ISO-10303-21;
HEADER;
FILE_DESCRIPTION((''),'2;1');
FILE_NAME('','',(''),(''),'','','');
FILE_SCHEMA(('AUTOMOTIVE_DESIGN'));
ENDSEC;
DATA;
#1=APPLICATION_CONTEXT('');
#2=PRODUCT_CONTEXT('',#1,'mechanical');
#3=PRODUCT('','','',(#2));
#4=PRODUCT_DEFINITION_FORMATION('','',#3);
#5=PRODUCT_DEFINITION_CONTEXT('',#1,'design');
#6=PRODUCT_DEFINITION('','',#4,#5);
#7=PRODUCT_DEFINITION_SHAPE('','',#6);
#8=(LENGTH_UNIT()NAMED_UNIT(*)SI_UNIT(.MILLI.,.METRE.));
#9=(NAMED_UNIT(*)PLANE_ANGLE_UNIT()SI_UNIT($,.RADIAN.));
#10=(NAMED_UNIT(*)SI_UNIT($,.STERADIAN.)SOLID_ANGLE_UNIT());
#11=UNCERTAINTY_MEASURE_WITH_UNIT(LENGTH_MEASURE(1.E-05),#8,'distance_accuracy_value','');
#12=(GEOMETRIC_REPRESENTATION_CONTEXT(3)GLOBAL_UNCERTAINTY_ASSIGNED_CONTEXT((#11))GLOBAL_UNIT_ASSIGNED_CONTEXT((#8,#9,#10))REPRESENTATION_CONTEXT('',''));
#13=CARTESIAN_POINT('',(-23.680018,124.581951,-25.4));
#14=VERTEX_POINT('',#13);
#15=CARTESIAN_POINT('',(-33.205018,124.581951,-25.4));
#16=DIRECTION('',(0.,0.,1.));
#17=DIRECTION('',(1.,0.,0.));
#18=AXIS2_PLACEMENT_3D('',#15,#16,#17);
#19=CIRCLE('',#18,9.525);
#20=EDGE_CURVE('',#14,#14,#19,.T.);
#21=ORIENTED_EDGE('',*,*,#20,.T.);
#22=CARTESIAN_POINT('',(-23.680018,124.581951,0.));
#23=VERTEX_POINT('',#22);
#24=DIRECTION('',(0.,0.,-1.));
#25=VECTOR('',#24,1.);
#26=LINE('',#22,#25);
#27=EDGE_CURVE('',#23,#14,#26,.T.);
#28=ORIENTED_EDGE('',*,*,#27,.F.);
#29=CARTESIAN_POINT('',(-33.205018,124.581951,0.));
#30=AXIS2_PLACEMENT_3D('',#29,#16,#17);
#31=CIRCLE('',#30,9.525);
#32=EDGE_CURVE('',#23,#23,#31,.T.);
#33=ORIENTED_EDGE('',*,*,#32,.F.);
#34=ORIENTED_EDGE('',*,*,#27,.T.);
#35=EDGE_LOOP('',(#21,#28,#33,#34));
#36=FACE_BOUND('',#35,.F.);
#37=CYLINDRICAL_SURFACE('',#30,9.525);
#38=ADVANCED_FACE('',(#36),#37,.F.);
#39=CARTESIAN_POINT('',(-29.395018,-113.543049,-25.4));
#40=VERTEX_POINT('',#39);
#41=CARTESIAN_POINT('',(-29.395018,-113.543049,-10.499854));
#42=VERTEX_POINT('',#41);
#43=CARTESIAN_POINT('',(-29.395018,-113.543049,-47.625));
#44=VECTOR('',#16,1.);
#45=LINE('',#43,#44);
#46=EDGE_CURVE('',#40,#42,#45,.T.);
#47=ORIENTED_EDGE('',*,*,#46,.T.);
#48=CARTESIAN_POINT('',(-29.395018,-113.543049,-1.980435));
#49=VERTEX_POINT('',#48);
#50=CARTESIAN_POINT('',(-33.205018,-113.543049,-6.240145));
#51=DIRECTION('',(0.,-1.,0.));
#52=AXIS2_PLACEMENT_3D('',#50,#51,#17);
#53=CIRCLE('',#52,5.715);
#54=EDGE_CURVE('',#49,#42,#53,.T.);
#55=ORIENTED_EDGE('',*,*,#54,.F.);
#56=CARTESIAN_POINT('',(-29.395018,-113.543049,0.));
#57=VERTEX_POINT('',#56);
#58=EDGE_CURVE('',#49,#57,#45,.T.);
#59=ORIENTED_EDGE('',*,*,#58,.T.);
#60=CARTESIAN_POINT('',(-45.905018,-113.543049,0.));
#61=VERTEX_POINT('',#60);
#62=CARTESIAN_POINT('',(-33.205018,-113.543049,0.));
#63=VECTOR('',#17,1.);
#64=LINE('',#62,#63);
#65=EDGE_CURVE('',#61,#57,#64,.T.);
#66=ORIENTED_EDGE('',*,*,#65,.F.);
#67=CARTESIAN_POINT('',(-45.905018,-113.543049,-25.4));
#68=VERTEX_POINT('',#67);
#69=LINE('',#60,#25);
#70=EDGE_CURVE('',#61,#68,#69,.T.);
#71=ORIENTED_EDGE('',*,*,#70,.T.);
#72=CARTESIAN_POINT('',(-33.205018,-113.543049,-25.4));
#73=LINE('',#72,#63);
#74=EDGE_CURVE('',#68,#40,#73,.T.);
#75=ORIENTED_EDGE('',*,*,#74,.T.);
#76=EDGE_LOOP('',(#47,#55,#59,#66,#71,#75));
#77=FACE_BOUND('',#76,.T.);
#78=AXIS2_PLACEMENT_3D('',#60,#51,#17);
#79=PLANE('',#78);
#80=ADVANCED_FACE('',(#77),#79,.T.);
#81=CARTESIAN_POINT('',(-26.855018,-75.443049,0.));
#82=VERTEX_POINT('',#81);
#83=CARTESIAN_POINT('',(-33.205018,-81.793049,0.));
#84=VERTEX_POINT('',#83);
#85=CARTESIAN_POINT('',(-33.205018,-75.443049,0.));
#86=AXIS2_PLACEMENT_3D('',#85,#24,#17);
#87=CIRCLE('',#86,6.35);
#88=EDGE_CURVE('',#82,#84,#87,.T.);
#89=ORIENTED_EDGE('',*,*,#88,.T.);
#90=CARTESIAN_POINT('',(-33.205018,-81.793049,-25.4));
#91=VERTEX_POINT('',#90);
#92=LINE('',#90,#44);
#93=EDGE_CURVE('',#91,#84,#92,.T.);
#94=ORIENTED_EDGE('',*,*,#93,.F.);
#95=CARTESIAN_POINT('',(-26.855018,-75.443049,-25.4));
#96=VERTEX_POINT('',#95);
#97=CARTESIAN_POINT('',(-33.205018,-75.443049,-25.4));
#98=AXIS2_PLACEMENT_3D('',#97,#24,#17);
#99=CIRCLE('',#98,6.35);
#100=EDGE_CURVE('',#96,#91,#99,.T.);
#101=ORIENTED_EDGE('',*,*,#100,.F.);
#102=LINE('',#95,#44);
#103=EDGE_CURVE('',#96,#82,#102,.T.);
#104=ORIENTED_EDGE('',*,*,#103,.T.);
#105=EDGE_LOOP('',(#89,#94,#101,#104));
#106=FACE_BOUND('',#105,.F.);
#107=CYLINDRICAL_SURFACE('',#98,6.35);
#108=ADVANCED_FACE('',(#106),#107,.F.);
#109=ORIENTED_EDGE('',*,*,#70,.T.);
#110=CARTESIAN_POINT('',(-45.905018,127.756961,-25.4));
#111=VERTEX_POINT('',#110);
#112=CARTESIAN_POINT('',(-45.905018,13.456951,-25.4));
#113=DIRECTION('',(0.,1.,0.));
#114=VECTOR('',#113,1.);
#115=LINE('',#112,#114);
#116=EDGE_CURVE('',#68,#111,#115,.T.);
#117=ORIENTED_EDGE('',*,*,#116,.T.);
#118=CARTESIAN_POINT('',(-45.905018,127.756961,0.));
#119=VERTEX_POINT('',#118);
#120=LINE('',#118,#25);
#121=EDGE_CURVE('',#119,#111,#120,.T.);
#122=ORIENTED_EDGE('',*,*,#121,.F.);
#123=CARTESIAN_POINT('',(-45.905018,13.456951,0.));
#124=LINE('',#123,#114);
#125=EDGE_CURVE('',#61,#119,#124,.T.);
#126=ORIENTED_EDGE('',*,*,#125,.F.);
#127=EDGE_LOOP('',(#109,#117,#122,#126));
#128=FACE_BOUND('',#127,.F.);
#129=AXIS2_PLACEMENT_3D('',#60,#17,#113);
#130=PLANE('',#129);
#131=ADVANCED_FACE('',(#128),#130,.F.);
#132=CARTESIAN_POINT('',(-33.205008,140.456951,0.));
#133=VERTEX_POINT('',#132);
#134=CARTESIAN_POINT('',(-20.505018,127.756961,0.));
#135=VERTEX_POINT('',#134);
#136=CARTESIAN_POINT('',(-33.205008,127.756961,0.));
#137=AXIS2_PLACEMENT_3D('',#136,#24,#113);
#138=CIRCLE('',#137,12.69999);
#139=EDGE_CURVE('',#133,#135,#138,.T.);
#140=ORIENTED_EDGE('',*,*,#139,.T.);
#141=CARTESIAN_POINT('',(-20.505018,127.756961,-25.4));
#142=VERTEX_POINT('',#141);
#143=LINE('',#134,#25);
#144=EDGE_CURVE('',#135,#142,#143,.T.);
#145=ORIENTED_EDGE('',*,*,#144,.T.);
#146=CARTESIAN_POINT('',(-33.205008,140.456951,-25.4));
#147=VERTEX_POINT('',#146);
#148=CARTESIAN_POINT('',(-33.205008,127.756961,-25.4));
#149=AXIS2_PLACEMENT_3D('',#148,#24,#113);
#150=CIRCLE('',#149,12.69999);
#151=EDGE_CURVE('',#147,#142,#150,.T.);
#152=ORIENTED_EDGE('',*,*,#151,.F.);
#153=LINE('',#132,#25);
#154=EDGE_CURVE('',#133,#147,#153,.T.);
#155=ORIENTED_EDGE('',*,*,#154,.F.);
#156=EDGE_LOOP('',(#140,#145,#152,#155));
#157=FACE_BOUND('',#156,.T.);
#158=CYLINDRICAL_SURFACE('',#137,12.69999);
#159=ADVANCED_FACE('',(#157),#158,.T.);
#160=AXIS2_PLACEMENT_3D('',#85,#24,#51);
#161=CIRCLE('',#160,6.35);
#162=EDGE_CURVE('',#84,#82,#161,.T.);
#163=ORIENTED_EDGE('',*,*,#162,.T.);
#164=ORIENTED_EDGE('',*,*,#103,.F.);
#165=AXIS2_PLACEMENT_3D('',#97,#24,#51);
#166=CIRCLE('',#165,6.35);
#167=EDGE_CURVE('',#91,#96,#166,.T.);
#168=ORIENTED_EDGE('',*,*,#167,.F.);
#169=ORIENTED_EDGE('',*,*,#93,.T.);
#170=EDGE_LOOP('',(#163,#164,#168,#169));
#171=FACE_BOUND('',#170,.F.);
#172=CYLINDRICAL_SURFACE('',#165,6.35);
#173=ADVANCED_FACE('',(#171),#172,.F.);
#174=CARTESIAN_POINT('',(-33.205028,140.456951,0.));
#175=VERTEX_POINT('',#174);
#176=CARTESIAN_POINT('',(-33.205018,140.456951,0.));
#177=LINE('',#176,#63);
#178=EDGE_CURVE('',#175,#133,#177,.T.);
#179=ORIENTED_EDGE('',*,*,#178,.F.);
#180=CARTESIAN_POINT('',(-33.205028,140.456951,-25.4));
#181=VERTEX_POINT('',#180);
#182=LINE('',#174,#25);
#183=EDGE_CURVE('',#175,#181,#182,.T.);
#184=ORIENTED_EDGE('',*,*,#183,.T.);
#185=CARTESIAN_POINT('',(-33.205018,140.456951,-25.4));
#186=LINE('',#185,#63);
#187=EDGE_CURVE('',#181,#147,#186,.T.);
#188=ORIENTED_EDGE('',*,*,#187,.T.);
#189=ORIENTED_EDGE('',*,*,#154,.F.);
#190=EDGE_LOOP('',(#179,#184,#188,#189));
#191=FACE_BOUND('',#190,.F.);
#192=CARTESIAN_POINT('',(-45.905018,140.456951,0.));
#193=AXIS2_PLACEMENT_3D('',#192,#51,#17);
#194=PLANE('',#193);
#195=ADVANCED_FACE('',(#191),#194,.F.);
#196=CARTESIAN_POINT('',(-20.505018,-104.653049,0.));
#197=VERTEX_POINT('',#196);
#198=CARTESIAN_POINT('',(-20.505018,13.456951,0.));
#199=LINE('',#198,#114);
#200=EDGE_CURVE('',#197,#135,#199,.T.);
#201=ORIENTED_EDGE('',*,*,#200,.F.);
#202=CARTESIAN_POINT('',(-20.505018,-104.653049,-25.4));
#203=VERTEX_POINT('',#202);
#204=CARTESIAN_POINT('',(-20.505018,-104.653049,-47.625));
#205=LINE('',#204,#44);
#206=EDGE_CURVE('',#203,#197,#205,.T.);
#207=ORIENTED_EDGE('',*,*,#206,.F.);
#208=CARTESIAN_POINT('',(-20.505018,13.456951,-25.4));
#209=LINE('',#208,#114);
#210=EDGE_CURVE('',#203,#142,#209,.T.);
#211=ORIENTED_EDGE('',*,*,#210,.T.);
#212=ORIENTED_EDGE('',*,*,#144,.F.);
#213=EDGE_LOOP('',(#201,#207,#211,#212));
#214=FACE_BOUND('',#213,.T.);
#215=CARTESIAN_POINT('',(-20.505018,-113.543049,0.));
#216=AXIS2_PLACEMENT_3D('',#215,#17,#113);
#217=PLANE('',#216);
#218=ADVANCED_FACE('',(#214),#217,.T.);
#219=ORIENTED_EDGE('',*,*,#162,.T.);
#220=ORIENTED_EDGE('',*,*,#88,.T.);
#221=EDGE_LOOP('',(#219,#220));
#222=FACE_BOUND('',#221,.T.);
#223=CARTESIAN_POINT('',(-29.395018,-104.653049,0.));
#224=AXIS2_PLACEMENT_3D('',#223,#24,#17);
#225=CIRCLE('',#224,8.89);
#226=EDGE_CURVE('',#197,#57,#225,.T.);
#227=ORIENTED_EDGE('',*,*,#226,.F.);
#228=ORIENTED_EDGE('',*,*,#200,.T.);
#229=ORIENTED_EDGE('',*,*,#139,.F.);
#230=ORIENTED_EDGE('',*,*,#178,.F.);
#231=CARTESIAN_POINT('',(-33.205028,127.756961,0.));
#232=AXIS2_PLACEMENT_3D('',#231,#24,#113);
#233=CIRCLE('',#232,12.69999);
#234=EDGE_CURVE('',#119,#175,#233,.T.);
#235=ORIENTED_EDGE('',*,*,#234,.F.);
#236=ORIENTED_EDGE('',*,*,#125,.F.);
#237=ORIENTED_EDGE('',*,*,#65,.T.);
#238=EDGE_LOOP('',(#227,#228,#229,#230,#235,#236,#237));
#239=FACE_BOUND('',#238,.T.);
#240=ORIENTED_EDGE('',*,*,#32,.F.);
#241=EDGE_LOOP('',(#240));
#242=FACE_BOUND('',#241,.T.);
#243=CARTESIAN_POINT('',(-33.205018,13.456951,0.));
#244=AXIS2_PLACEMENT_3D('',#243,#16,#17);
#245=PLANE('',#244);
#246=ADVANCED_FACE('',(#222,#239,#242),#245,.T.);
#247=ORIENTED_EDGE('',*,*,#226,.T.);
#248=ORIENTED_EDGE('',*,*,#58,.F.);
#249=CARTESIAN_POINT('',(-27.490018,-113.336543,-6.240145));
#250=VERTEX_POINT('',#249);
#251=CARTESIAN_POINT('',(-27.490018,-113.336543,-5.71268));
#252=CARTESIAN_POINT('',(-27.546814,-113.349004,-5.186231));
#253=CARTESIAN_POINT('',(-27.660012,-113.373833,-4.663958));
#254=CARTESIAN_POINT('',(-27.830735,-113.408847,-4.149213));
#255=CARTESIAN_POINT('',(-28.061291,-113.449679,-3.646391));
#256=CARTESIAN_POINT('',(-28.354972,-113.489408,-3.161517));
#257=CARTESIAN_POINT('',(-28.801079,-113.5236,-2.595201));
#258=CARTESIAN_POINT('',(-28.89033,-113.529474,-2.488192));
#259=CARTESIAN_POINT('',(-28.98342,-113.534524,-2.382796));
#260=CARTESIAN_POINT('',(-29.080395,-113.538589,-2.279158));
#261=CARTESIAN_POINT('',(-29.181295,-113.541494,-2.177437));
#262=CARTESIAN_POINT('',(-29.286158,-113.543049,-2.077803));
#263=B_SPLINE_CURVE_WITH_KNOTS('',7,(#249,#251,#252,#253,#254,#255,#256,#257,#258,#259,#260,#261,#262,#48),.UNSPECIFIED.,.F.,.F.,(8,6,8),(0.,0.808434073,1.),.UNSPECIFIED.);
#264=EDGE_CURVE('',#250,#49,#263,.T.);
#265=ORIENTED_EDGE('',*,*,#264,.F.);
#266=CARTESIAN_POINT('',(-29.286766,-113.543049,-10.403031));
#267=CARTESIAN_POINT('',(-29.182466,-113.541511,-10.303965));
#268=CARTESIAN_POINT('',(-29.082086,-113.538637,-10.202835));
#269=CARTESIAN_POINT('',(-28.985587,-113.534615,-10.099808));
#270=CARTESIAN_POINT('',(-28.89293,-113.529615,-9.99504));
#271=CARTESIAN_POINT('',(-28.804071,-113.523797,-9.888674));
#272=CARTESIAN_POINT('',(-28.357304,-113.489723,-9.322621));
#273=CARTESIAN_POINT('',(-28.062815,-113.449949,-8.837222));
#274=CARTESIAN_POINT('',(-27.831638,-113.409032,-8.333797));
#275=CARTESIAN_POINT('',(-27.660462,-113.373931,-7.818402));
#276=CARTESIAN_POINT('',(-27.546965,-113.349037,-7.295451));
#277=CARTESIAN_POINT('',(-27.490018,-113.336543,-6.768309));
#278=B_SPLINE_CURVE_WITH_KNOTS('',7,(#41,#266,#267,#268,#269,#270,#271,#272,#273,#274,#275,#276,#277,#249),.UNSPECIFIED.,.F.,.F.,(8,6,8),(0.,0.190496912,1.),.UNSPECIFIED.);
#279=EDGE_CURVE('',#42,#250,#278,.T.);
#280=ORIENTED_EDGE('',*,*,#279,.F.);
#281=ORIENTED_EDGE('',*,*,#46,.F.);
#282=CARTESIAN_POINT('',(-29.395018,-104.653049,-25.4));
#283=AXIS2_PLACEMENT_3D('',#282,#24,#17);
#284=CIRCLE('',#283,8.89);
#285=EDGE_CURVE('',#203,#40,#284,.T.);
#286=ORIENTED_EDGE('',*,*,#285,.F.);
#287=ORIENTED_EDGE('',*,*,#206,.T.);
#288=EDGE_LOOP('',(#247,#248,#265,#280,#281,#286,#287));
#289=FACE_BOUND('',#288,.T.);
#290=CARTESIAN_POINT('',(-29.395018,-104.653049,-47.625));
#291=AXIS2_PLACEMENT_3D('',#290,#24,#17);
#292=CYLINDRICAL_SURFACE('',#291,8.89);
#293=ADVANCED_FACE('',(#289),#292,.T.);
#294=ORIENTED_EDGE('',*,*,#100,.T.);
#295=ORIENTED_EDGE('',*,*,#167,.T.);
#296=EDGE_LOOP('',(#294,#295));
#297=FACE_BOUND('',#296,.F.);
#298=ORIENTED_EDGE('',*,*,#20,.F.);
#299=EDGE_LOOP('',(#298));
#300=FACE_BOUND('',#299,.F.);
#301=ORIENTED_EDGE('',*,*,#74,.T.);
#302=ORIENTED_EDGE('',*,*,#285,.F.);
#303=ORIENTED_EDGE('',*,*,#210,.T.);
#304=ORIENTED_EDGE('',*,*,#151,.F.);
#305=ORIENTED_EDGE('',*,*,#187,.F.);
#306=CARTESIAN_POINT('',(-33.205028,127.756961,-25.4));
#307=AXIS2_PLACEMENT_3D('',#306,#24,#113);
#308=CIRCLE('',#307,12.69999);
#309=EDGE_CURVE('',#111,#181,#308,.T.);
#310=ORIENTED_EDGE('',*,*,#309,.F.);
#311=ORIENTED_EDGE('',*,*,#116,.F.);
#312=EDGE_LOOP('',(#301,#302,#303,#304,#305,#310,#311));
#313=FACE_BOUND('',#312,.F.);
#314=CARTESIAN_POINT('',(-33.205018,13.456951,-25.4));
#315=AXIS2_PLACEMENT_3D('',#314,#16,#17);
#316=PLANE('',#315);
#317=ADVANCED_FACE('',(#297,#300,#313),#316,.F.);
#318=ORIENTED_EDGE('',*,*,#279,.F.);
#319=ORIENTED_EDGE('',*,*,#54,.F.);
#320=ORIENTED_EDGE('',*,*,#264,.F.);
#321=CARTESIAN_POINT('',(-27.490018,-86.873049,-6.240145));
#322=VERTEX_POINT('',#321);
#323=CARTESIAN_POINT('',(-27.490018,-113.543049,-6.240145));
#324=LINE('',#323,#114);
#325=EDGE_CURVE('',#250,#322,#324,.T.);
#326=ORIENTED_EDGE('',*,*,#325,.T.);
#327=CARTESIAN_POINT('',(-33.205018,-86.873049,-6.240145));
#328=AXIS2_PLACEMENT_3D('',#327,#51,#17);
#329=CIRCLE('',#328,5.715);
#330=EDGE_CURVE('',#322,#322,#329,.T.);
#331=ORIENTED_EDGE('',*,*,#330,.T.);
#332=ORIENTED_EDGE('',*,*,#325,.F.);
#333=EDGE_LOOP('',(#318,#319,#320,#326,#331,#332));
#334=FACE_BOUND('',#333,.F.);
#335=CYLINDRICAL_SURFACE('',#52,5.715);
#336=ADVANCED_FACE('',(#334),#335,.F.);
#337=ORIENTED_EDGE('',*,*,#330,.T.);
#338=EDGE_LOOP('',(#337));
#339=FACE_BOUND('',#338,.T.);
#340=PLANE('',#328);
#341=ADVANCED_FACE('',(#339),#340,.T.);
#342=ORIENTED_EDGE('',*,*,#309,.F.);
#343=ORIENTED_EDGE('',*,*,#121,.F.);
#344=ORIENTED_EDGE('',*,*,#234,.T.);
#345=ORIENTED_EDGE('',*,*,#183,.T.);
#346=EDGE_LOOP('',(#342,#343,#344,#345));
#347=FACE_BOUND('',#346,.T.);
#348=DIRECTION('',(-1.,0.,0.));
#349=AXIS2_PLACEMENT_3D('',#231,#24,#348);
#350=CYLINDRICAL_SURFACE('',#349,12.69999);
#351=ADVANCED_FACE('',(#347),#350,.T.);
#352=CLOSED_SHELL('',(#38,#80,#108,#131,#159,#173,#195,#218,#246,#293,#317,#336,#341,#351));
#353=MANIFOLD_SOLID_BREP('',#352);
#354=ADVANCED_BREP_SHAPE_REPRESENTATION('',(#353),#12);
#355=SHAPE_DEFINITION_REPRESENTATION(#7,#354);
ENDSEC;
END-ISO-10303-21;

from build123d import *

# Parameters (mm, degrees)
F0_W        = 25.4
F0_H        = 254
F0_R        = 9.525
F1_DEPTH    = 25.4
F2_R        = 12.69999
F3_R        = 5.715
F4_DEPTH    = 26.67
F6_DEPTH    = 25.4
F7_T1_DEPTH = 69.85


# Not quite as in the source:
# - a fillet or chamfer that OpenCascade refuses, or shapes differently, is made with other operations: its cross-section is extruded or revolved along the edge and cut away or added
# - a fillet or chamfer is up to 0.001 mm smaller than in the source, because OpenCascade refuses the exact size


with BuildPart() as f1:
    # F0 (on Top) → F1 (new body)
    with BuildSketch(Plane.XY):
        with Locations((-33.2050182253, 13.4569510469)):
            Rectangle(F0_W, F0_H)
        with Locations((-33.2050182253, 124.5819510469)):
            Circle(F0_R, mode=Mode.SUBTRACT)
    extrude(amount=-F1_DEPTH)

    # F2 (radius 12.7 in the source; OpenCascade refuses exactly that, so slightly less here)
    f2_edges = [f1.edges().sort_by_distance(p)[0] for p in [
        (-45.905018, 140.456951, -12.7),
        (-20.505018, 140.456951, -12.7),
    ]]
    fillet(f2_edges, radius=F2_R)

    # F3 (on face) → F4 (cut)
    with BuildSketch(Plane.XZ.offset(113.5430489531)):
        with Locations((-33.2050182253, -6.2401448376)):
            Circle(F3_R)
    extrude(amount=-F4_DEPTH, mode=Mode.SUBTRACT)

    # F5 (on face) → F6 (cut)
    with BuildSketch(Plane(origin=(0, 0, -25.4), x_dir=(1, 0, 0), z_dir=(0, 0, -1))):
        with BuildLine():
            ThreePointArc((-33.2050182253, 81.7930489531), (-37.6951462858, 70.9529208925), (-26.8550182253, 75.4430489531))
            ThreePointArc((-26.8550182253, 75.4430489531), (-28.7148901648, 79.9331770136), (-33.2050182253, 81.7930489531))
        make_face()
    extrude(amount=-F6_DEPTH, mode=Mode.SUBTRACT)

    # F7: fillet of radius 8.89 on 1 edges, made by hand

    # F7_s2 → F7_t1 (cut)
    with BuildSketch(Plane.XY.offset(-47.625)):
        with BuildLine():
            ThreePointArc((-20.5050182253, -104.6530489531), (-23.1088389406, -110.9392282378), (-29.3950182253, -113.5430489531))
            Line((-29.3950182253, -113.5430489531), (-20.5050182253, -113.5430489531))
            Line((-20.5050182253, -113.5430489531), (-20.5050182253, -104.6530489531))
        make_face()
    extrude(amount=F7_T1_DEPTH, mode=Mode.SUBTRACT)


solid = f1.part
